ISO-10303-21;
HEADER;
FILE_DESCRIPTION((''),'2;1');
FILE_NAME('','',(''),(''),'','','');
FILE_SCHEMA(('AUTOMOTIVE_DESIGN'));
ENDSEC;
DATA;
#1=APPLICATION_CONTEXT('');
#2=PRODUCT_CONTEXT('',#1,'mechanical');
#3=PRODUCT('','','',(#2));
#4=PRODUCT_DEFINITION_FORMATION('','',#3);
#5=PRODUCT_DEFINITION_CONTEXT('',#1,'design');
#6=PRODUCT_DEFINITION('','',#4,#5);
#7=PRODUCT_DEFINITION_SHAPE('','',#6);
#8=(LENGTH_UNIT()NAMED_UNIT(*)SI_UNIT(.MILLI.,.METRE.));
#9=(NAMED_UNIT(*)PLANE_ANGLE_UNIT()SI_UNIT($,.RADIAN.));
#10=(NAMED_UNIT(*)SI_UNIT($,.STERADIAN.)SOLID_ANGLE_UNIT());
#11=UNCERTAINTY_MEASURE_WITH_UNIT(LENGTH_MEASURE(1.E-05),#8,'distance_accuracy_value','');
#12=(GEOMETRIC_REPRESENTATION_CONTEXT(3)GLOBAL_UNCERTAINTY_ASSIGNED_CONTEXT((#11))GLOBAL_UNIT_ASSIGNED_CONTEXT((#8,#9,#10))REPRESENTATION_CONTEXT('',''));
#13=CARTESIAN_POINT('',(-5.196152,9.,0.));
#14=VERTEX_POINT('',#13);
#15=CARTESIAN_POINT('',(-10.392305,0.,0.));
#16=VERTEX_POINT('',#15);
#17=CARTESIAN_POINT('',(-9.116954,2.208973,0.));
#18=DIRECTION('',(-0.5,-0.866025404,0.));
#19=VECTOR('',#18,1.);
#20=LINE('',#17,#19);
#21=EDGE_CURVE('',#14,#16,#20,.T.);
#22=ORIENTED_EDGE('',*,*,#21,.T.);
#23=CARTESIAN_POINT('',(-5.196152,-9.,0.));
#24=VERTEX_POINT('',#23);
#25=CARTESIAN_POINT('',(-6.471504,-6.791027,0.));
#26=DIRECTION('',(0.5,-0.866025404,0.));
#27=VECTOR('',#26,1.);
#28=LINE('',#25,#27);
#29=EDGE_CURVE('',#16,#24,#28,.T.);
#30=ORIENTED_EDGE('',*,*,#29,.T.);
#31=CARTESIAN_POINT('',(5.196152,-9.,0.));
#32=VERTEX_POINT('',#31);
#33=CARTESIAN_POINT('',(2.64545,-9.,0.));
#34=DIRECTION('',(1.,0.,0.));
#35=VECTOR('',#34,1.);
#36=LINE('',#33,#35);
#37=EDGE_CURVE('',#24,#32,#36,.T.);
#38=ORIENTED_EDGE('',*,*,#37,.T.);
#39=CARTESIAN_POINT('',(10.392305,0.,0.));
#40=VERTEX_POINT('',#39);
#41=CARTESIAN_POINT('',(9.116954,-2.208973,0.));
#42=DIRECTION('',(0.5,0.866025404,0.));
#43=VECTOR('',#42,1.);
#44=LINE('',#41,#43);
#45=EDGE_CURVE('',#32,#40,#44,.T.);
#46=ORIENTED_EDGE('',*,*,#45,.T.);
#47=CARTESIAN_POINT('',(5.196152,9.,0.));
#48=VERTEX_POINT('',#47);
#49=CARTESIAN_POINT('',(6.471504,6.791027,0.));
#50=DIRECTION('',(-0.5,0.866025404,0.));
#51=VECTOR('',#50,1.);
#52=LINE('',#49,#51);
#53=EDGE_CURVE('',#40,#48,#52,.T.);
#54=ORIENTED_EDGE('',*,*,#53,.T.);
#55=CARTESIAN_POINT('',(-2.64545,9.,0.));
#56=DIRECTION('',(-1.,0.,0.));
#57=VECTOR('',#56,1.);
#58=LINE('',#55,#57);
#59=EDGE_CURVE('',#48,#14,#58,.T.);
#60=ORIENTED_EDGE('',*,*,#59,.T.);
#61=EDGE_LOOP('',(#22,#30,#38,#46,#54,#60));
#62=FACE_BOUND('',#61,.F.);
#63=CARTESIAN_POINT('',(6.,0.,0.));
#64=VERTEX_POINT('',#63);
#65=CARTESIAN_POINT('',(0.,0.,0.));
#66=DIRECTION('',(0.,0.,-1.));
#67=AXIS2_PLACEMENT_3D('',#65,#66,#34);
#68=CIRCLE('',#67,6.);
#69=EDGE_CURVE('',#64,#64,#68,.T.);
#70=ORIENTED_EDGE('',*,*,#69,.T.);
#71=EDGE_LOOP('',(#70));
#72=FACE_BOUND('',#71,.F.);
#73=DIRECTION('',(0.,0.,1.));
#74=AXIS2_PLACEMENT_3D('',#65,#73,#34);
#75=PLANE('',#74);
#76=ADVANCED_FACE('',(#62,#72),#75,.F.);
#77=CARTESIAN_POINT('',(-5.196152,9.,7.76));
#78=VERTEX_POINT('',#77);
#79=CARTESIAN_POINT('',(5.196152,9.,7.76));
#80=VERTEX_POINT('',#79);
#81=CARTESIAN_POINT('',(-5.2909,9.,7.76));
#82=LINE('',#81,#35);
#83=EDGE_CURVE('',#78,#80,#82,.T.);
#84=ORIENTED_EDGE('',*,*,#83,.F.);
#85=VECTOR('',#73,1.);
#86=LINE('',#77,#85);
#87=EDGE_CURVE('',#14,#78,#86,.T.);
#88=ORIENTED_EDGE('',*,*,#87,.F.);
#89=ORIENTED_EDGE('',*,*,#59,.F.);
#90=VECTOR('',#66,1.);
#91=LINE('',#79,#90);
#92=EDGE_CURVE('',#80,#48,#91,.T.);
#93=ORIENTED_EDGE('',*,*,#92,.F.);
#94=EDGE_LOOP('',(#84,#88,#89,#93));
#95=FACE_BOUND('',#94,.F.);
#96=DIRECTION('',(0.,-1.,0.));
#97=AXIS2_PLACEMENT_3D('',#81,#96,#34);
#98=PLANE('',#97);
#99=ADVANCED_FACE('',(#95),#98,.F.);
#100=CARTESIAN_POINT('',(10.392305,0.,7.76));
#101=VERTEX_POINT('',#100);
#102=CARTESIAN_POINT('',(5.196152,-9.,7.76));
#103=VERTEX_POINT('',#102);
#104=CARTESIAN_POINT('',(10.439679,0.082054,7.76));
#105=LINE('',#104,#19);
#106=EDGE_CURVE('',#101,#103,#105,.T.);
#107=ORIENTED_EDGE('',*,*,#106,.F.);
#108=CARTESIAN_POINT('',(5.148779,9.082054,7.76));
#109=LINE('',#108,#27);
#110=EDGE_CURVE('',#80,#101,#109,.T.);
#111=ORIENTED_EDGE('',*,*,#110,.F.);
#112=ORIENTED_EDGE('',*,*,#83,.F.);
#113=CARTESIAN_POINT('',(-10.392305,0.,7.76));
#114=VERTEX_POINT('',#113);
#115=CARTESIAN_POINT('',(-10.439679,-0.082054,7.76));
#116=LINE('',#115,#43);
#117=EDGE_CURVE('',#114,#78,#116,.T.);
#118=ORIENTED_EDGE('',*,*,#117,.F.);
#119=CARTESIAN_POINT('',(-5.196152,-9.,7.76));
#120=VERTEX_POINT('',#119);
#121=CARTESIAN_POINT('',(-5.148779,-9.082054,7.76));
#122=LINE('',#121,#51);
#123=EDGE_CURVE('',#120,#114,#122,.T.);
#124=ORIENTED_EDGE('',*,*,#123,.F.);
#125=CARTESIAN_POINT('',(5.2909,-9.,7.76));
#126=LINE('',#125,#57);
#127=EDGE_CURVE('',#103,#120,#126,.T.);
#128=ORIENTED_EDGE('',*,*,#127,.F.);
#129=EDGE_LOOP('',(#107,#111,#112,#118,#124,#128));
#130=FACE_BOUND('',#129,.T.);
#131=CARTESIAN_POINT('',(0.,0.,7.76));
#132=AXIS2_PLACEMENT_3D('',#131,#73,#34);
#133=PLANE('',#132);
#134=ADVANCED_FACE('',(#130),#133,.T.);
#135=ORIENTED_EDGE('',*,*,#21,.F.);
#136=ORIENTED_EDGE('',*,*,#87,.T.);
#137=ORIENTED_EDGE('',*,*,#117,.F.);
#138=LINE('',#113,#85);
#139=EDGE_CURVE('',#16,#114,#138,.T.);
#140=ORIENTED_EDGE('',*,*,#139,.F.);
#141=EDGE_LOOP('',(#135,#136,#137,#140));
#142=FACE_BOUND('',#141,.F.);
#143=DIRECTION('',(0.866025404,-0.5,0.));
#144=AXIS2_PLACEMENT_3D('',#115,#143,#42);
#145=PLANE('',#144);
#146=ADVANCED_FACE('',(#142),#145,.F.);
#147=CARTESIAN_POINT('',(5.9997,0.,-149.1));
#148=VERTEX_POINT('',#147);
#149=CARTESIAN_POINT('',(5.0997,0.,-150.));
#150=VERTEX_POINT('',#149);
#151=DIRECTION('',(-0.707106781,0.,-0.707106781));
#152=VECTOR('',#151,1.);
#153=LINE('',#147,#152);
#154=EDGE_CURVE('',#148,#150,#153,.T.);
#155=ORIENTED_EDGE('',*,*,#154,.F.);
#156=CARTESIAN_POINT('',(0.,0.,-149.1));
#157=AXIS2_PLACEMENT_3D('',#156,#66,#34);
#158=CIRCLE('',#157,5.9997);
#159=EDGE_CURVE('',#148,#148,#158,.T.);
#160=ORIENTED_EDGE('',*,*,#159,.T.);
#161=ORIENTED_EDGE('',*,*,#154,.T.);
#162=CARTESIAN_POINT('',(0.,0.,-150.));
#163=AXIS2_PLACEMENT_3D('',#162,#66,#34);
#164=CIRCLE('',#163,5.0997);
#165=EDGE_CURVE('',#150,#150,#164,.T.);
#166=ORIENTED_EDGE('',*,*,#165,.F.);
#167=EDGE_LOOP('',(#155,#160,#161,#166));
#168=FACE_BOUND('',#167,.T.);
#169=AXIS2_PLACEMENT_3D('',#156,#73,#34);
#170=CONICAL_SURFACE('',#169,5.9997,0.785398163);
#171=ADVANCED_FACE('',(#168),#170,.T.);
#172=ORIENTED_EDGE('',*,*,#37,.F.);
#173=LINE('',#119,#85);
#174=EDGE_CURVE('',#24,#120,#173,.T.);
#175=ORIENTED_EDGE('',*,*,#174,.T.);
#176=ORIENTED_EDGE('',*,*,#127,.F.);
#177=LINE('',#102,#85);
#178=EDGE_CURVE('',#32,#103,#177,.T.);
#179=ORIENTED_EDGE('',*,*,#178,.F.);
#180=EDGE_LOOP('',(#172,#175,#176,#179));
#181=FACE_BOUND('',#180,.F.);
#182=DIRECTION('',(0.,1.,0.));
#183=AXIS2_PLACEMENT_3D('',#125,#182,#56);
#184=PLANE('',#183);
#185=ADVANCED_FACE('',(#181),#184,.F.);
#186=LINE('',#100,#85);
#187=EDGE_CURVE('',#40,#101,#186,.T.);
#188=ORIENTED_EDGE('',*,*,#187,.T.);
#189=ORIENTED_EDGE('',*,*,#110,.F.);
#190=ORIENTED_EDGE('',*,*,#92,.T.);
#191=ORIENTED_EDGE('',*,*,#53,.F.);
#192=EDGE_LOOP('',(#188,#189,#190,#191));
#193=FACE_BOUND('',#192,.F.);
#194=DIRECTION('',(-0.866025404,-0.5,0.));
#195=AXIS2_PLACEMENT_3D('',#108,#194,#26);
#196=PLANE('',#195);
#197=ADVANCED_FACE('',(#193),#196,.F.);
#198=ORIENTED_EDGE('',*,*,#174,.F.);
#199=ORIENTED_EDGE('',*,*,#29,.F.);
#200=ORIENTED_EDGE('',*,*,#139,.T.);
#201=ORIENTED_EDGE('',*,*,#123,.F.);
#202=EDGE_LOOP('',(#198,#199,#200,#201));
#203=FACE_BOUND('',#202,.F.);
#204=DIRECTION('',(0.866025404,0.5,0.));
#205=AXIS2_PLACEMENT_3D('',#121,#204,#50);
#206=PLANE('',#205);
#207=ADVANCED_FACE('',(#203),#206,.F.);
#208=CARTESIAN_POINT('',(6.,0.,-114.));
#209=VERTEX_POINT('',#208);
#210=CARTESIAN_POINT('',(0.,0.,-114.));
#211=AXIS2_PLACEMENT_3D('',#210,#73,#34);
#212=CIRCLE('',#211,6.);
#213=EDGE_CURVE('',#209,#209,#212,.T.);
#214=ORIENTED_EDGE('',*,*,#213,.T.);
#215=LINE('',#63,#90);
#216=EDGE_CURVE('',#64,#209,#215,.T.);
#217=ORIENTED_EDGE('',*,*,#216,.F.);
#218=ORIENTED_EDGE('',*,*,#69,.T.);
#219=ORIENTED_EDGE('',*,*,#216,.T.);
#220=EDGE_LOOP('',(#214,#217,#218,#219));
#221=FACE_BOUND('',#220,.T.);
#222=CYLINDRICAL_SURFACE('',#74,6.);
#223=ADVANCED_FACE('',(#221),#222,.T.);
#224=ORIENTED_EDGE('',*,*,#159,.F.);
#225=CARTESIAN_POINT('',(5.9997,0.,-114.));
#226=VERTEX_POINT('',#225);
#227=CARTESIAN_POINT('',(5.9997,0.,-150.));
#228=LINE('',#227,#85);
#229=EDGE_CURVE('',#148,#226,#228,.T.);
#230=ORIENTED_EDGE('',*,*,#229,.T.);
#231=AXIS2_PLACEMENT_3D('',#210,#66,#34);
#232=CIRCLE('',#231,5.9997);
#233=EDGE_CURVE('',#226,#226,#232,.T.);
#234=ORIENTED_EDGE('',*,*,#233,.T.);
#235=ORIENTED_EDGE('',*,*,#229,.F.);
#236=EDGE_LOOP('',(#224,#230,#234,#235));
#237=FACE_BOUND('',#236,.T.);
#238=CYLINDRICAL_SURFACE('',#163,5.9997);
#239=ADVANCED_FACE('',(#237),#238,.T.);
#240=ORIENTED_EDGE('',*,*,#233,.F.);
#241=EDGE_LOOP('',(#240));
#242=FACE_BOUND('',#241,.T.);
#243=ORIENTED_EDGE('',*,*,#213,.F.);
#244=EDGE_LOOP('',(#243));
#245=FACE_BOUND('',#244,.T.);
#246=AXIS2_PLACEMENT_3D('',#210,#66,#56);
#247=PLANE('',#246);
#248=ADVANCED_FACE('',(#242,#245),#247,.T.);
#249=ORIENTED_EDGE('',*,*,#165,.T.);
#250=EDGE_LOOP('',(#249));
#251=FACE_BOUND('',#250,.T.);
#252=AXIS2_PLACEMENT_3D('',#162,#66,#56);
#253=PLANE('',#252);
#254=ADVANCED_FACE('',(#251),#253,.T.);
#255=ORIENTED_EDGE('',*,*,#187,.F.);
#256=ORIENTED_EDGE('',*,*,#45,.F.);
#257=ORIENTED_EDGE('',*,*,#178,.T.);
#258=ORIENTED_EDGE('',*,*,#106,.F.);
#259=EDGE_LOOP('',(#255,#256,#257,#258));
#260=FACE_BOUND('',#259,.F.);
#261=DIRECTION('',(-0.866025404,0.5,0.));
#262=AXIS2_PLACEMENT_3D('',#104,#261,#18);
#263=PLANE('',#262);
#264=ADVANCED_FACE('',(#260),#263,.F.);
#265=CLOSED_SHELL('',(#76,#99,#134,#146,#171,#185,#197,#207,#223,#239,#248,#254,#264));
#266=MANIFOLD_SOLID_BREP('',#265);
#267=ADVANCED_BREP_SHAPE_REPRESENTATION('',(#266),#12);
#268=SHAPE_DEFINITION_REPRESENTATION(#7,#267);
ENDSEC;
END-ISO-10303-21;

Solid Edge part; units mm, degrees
sketch "Sketch1" plane through (0, 0, 0) normal (0, 0, 1) x (1, 0, 0)
  circle A0 centre (0, 0) radius 10.44
  dimension "D1" = 20.88
extrude "Protrusion1" add sketch "Sketch1" along normal blind 7.76
sketch "Sketch2" plane through (0, 0, 0) normal (0, 0, -1) x (1, 0, 0)
  circle A0 centre (0, 0) radius 6
extrude "Protrusion2" add sketch "Sketch2" along normal blind 150
sketch "Sketch3" plane through (0, 0, -150) normal (0, 0, -1) x (1, 0, 0)
  circle A0 centre (0, 0) radius 5.9997
extrude "Cutout1" cut sketch "Sketch3" against normal blind 36 flip side to cut
chamfer "Chamfer_1" distance 0.9 angle 45 1 edges at (-5.9997, 0, -150)
sketch "Sketch4" plane through (0, 0, 7.76) normal (0, 0, 1) x (1, 0, 0)
  line L0 (-5.2909, 9) -> (5.2909, 9)
  dimension "D1" = 18
extrude "Cutout2" cut sketch "Sketch4" against normal up to next material side at (0, 9.05, 7.76)
pattern_circular "Pattern1" count 6 over 360 about axis through (0, 0, 7.76) along (0, 0, 1) of "Cutout2"
properties part number "119751"
